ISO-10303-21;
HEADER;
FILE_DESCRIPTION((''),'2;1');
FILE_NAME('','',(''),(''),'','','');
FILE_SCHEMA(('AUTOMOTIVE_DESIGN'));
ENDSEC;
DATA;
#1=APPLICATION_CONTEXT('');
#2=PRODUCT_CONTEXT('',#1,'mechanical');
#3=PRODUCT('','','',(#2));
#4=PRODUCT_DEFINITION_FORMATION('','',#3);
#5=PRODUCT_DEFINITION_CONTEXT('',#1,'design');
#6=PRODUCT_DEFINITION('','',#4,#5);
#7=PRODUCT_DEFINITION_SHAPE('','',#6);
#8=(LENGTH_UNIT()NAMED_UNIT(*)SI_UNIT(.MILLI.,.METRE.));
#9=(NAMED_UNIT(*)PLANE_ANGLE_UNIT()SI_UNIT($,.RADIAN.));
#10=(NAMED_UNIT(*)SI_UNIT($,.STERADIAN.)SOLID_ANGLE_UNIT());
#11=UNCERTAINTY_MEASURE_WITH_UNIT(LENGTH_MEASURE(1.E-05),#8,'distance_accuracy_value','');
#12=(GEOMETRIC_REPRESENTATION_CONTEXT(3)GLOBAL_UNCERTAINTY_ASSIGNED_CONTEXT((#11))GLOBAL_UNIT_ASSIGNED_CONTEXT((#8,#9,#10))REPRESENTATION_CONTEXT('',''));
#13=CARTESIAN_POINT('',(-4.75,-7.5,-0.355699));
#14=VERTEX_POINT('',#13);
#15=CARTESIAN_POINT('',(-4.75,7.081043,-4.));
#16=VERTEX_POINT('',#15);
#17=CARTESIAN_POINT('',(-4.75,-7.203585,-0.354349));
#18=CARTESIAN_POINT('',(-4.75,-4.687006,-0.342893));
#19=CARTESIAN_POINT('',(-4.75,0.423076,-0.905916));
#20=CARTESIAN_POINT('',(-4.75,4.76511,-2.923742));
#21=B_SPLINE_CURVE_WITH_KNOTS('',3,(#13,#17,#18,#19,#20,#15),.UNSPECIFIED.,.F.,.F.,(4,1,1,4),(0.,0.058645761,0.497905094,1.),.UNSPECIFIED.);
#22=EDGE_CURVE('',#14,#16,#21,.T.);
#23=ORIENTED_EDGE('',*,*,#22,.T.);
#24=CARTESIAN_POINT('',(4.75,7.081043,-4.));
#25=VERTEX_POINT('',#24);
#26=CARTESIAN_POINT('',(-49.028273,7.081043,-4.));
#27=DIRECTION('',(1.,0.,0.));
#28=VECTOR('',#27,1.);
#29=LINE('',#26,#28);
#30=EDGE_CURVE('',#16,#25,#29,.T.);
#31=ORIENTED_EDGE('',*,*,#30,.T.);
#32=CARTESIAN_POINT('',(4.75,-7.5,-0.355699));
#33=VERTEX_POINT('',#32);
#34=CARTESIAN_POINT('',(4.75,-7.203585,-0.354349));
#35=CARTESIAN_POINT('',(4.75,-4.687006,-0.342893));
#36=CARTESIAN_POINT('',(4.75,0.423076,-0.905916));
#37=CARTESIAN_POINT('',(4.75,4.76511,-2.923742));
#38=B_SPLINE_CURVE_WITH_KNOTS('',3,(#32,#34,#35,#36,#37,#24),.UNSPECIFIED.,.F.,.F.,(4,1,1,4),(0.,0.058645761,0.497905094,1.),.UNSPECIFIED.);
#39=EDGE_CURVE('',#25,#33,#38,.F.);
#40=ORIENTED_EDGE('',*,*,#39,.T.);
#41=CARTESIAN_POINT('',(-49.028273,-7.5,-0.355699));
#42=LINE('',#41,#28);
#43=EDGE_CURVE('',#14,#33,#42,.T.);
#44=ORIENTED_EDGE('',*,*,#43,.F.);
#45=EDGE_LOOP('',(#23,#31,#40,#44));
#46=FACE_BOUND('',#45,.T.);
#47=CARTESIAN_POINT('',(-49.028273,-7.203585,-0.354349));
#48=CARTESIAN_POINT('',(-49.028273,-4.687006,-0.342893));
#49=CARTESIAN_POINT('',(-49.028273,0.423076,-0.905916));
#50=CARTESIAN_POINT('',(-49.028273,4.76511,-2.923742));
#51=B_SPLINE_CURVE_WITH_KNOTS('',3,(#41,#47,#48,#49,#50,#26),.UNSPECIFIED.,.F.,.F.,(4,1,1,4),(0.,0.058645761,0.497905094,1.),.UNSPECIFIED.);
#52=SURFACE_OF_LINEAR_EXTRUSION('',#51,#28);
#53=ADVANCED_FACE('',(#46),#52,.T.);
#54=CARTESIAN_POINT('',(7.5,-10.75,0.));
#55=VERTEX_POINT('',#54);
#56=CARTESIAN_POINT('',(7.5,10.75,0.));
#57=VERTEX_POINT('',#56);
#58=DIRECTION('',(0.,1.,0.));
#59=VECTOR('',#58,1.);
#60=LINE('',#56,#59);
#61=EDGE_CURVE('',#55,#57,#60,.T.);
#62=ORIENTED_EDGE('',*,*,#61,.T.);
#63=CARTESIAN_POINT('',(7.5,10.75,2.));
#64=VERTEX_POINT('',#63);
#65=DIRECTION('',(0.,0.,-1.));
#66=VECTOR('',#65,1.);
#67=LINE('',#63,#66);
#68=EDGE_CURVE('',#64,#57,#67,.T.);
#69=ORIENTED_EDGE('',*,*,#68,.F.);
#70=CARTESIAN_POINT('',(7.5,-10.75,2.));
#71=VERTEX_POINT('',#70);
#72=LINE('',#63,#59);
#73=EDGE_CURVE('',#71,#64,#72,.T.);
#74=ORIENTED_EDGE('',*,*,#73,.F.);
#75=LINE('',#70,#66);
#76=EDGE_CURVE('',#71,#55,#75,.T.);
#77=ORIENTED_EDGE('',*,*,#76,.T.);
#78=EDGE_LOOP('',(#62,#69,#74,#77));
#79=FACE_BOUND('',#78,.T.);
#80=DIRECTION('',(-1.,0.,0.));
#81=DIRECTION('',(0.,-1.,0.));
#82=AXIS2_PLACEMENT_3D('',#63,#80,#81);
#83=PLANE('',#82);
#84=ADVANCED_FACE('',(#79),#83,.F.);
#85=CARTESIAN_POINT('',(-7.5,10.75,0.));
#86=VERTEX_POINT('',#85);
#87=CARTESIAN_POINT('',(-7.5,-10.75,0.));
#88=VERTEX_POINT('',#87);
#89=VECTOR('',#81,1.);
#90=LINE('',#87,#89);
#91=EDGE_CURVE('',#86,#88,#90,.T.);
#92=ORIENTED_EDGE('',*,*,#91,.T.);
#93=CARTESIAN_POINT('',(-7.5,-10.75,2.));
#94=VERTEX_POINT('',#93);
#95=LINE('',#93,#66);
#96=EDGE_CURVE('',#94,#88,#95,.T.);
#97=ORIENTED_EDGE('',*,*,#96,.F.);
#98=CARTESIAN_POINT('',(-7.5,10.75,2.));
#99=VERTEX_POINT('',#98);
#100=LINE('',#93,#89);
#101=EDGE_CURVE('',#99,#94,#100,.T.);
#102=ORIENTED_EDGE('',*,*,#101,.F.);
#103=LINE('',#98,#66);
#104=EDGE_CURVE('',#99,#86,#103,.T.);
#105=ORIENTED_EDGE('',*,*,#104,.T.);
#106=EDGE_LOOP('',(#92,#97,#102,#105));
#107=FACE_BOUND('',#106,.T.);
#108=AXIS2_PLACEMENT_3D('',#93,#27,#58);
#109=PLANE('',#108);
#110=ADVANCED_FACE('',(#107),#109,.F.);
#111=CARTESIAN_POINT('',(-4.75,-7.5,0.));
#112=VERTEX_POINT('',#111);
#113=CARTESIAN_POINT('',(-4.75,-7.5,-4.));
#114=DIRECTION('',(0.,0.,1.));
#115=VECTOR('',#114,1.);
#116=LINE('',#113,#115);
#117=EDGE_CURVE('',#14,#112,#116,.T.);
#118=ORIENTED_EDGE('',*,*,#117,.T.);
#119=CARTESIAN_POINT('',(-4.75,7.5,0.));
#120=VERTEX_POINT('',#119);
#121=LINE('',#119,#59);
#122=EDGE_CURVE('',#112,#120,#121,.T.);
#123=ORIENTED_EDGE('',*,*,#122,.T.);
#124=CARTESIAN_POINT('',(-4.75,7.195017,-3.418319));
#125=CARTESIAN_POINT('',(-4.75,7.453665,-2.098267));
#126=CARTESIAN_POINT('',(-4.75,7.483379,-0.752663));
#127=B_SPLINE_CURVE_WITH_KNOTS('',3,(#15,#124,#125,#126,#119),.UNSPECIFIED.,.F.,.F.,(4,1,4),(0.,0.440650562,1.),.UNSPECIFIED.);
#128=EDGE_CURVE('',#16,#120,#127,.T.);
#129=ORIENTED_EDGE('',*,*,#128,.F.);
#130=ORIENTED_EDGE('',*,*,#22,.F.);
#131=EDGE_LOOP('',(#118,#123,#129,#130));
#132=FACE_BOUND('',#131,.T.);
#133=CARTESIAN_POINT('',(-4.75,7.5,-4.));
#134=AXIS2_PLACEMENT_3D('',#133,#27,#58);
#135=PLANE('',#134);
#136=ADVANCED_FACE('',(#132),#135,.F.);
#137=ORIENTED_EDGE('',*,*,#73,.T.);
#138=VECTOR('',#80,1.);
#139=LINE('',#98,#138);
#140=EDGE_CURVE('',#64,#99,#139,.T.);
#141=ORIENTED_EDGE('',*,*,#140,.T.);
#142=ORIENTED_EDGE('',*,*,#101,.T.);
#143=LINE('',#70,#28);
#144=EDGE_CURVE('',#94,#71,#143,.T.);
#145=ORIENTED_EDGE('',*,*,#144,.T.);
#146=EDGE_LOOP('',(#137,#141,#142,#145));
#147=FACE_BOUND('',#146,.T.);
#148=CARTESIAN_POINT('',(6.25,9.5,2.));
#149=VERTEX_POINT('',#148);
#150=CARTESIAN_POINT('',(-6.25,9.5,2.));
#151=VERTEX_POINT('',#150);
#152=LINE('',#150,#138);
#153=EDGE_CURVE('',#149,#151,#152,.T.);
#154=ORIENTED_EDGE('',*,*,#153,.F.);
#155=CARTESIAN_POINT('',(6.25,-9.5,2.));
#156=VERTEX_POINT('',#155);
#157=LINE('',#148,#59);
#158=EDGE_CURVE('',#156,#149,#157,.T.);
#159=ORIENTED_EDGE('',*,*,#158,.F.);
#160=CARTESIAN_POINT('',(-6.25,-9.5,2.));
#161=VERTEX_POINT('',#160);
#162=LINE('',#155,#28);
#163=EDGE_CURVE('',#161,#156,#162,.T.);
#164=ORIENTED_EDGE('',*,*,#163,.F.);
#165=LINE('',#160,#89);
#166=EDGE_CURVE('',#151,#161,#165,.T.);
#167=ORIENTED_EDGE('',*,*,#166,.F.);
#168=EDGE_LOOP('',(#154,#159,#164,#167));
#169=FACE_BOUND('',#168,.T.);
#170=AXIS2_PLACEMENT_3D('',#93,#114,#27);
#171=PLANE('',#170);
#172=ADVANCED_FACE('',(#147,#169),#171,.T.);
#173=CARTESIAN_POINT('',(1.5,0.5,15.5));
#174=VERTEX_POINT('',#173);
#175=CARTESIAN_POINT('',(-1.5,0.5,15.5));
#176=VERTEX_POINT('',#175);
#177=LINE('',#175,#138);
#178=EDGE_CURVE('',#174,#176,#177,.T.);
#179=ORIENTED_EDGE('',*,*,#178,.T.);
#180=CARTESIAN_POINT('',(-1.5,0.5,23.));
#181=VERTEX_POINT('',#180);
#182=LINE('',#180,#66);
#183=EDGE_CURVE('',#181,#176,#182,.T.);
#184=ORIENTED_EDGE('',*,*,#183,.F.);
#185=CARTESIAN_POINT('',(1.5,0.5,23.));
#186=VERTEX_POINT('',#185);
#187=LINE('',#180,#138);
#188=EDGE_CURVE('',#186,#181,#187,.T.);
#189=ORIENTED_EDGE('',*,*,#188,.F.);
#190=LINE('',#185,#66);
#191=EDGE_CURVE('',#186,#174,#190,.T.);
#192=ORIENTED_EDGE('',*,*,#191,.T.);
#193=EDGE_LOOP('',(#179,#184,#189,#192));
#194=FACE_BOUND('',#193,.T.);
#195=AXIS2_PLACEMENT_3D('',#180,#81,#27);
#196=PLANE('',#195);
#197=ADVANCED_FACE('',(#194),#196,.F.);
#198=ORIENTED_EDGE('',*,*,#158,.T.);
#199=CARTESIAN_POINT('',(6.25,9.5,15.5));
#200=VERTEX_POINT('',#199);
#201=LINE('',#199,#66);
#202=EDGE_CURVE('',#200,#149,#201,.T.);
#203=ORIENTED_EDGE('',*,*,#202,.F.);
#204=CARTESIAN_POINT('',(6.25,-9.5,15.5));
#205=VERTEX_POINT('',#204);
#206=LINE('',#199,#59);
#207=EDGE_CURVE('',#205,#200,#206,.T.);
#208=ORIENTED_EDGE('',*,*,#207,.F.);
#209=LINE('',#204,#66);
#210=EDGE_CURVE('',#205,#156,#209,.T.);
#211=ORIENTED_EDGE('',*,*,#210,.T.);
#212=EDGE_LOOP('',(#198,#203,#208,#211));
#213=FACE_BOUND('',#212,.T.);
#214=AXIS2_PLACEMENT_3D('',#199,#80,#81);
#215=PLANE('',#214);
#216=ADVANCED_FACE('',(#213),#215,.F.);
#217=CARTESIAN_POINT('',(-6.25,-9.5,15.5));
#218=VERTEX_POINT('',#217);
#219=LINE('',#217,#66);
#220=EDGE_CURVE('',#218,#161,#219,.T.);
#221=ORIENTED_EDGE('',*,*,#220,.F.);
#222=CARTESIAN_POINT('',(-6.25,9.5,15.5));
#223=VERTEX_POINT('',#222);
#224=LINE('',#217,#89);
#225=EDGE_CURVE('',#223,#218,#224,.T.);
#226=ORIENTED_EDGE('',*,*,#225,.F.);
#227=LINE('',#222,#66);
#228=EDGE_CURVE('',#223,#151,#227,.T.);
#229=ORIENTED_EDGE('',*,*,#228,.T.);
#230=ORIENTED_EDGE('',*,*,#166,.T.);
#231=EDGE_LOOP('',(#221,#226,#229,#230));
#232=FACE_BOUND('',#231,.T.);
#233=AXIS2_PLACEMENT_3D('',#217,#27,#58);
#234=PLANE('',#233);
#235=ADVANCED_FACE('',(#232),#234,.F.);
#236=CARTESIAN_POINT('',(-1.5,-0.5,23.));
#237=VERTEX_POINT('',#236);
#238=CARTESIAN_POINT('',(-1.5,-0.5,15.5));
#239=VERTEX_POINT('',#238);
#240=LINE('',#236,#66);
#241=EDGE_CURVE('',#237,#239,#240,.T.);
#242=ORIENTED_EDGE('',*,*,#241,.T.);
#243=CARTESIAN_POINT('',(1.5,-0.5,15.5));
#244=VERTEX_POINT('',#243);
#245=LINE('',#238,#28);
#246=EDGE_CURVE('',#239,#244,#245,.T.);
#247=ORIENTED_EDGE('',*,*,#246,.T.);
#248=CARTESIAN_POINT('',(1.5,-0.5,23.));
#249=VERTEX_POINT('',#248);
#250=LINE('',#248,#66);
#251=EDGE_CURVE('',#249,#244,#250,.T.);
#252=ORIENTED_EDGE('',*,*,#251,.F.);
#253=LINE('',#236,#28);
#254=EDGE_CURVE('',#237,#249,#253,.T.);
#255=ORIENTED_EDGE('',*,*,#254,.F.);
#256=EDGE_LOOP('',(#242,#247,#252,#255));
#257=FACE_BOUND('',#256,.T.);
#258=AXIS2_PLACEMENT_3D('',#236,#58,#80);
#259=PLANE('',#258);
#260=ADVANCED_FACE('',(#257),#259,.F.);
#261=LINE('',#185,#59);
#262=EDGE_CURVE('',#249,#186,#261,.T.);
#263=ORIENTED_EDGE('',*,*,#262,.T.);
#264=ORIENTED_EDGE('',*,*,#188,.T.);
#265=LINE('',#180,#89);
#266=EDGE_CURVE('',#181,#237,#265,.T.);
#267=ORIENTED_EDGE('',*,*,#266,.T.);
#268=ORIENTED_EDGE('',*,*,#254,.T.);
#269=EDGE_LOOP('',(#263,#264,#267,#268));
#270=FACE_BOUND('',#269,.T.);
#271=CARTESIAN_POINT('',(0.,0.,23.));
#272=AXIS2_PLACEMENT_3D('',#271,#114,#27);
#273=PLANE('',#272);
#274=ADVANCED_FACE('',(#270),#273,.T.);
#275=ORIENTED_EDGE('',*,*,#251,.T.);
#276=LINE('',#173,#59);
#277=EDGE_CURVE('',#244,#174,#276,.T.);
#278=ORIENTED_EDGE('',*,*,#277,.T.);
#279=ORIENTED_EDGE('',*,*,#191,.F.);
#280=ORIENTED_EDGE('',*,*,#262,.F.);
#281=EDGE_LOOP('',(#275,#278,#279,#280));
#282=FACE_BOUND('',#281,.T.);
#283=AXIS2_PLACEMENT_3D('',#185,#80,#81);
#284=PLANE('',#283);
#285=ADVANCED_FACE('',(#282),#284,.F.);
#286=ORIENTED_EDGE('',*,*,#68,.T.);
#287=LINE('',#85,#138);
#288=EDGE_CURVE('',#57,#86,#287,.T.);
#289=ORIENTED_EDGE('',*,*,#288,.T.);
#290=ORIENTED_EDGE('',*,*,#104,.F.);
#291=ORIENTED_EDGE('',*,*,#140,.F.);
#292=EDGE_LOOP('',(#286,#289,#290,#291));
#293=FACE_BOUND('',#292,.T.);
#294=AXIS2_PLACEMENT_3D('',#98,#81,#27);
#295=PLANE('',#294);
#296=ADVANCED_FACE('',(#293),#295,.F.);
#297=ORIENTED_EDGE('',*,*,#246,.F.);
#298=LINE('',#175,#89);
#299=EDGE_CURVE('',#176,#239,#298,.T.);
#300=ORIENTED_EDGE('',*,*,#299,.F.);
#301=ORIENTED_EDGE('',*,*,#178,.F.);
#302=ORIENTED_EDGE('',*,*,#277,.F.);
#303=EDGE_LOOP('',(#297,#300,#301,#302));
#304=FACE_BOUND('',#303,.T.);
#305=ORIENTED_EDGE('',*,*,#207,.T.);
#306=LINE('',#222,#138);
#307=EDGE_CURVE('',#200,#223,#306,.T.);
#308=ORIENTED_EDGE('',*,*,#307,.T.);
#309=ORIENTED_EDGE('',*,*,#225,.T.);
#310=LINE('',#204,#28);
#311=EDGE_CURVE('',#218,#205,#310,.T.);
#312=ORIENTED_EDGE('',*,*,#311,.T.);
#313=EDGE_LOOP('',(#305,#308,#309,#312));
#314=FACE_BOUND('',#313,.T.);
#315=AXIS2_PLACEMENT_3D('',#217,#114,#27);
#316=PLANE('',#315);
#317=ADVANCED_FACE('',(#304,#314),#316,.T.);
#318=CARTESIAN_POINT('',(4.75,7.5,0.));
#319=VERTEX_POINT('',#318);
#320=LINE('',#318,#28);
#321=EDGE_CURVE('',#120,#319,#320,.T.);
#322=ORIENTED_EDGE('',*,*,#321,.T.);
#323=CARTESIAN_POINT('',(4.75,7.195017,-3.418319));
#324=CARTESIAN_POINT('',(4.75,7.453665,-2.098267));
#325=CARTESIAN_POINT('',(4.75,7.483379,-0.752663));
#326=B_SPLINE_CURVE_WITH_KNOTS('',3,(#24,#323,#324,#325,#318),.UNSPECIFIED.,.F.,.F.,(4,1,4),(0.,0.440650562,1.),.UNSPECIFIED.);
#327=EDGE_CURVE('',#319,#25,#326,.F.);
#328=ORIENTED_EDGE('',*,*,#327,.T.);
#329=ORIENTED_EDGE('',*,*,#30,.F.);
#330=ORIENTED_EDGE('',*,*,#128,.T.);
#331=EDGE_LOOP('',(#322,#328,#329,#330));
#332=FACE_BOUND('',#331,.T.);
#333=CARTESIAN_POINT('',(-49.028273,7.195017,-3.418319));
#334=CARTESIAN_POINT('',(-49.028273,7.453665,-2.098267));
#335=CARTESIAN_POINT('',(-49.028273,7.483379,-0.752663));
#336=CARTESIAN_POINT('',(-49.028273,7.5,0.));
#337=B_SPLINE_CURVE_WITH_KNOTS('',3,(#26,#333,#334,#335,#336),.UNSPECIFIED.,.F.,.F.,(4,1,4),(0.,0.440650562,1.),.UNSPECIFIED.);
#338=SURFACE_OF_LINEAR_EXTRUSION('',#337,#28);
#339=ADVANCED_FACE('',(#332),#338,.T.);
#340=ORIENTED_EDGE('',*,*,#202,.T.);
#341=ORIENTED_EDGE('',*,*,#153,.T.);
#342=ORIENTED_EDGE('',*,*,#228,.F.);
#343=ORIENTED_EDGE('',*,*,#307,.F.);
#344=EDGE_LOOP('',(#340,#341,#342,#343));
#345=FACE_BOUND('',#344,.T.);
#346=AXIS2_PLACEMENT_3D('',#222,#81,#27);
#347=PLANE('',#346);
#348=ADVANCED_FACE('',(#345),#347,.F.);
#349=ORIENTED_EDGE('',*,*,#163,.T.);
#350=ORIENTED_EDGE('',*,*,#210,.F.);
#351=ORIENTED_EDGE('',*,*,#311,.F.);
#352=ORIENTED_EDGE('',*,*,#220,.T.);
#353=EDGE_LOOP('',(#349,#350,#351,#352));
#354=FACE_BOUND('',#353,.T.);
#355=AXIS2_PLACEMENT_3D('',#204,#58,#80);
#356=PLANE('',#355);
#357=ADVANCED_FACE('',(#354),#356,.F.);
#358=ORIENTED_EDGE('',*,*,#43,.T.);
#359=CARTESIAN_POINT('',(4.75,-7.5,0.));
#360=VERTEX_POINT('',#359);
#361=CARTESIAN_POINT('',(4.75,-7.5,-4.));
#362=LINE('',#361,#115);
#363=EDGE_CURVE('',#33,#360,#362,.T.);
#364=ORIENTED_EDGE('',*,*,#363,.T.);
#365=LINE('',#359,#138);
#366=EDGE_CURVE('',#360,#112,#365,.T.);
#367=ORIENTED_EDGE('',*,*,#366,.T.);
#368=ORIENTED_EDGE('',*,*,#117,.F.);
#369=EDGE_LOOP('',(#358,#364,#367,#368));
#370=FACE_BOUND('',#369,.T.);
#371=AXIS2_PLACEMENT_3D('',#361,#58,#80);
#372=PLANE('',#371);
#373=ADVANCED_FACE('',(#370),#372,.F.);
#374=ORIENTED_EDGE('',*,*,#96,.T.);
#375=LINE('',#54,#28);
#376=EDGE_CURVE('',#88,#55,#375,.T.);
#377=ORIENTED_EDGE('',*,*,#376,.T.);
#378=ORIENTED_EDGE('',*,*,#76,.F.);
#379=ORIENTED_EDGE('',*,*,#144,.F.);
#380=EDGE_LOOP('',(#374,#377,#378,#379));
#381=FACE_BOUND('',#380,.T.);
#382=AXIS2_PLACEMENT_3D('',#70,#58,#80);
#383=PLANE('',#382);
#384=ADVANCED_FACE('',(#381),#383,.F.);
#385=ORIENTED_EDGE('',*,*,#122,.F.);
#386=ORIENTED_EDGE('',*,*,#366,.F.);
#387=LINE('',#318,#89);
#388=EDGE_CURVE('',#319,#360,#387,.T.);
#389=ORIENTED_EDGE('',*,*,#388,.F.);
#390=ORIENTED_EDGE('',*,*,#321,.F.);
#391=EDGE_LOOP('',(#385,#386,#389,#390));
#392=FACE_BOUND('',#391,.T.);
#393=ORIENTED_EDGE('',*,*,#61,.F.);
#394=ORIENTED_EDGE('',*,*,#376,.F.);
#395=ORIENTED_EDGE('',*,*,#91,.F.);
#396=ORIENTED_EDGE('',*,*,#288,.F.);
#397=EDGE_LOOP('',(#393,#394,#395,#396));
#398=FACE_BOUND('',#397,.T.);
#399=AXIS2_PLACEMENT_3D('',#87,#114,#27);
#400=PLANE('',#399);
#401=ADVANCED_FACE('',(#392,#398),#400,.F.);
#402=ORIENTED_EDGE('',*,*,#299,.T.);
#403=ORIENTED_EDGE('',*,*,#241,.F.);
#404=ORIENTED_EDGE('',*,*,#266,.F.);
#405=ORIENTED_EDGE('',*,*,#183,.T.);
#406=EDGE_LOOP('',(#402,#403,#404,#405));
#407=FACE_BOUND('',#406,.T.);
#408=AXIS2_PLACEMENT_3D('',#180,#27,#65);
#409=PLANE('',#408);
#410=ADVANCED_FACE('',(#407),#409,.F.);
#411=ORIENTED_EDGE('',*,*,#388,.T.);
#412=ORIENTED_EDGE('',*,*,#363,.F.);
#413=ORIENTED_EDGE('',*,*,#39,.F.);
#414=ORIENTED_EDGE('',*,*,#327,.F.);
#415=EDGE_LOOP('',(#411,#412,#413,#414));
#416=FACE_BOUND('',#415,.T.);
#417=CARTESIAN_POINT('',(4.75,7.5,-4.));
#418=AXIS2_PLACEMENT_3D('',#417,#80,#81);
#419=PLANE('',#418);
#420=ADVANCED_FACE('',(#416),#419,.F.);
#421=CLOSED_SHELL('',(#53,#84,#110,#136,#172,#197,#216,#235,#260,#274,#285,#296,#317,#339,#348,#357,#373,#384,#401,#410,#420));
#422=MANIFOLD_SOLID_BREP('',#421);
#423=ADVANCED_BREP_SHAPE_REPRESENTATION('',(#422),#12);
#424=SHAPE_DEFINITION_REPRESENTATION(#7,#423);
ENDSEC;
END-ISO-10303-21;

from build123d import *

# Parameters (mm, degrees)
SKETCH_1_W          = 15
SKETCH_1_H          = 21.5
EXTRUDE_1_DEPTH     = 2
SKETCH_2_W          = 12.5
SKETCH_2_H          = 19
EXTRUDE_2_DEPTH     = 13.5
SKETCH_3_W          = 9.5
SKETCH_3_H          = 15
EXTRUDE_3_DEPTH     = 4
CUT_EXTRUDE_START   = -9.5
CUT_EXTRUDE_1_DEPTH = 9.5
SKETCH_6_W          = 3
SKETCH_6_H          = 1
EXTRUDE_1_2_DEPTH   = 7.5


# Read off the part's stored shape, not the designer's step: 切除-拉伸1
with BuildPart() as part:
    # 草图1 → Extrude 1 (new body)
    with BuildSketch(Plane.XY):
        Rectangle(SKETCH_1_W, SKETCH_1_H)
    extrude(amount=EXTRUDE_1_DEPTH)

    # 草图2 → 拉伸2 (add)
    with BuildSketch(Plane.XY.offset(2)):
        Rectangle(SKETCH_2_W, SKETCH_2_H)
    extrude(amount=EXTRUDE_2_DEPTH)

    # 草图3 → 拉伸3 (add)
    with BuildSketch(Plane(origin=(0, 0, 0), x_dir=(-1, 0, 0), z_dir=(0, 0, -1))):
        Rectangle(SKETCH_3_W, SKETCH_3_H)
    extrude(amount=EXTRUDE_3_DEPTH)

    # 切除-拉伸1 outline → 切除-拉伸1 (cut)
    with BuildSketch(Plane.ZY.offset(4.75).offset(CUT_EXTRUDE_START)):
        with BuildLine():
            Line((-4, -7.5), (-0.355698538, -7.5))
            add(Edge.make_bspline(
                [(-0.355698538, -7.5), (-0.354349182, -7.203584733), (-0.342893084, -4.687006069), (-0.90591647, 0.423075599), (-2.923742076, 4.765110149), (-4, 7.081043238)],
                knots=[0, 0, 0, 0, 0.058645761, 0.497905094, 1, 1, 1, 1], degree=3))
            Line((-4, 7.081043238), (-4, -7.5))
        make_face()
        with BuildLine():
            Line((-4, 7.5), (-4, 7.081043238))
            add(Edge.make_bspline(
                [(-4, 7.081043238), (-3.418318642, 7.19501669), (-2.098267317, 7.453664838), (-0.752663012, 7.483379257), (0, 7.5)],
                knots=[0, 0, 0, 0, 0.440650562, 1, 1, 1, 1], degree=3))
            Line((0, 7.5), (-4, 7.5))
        make_face()
    extrude(amount=CUT_EXTRUDE_1_DEPTH, mode=Mode.SUBTRACT)

    # 草图6 → Extrude 1 2 (add)
    with BuildSketch(Plane.XY.offset(15.5)):
        Rectangle(SKETCH_6_W, SKETCH_6_H)
    extrude(amount=EXTRUDE_1_2_DEPTH)


solid = part.part
